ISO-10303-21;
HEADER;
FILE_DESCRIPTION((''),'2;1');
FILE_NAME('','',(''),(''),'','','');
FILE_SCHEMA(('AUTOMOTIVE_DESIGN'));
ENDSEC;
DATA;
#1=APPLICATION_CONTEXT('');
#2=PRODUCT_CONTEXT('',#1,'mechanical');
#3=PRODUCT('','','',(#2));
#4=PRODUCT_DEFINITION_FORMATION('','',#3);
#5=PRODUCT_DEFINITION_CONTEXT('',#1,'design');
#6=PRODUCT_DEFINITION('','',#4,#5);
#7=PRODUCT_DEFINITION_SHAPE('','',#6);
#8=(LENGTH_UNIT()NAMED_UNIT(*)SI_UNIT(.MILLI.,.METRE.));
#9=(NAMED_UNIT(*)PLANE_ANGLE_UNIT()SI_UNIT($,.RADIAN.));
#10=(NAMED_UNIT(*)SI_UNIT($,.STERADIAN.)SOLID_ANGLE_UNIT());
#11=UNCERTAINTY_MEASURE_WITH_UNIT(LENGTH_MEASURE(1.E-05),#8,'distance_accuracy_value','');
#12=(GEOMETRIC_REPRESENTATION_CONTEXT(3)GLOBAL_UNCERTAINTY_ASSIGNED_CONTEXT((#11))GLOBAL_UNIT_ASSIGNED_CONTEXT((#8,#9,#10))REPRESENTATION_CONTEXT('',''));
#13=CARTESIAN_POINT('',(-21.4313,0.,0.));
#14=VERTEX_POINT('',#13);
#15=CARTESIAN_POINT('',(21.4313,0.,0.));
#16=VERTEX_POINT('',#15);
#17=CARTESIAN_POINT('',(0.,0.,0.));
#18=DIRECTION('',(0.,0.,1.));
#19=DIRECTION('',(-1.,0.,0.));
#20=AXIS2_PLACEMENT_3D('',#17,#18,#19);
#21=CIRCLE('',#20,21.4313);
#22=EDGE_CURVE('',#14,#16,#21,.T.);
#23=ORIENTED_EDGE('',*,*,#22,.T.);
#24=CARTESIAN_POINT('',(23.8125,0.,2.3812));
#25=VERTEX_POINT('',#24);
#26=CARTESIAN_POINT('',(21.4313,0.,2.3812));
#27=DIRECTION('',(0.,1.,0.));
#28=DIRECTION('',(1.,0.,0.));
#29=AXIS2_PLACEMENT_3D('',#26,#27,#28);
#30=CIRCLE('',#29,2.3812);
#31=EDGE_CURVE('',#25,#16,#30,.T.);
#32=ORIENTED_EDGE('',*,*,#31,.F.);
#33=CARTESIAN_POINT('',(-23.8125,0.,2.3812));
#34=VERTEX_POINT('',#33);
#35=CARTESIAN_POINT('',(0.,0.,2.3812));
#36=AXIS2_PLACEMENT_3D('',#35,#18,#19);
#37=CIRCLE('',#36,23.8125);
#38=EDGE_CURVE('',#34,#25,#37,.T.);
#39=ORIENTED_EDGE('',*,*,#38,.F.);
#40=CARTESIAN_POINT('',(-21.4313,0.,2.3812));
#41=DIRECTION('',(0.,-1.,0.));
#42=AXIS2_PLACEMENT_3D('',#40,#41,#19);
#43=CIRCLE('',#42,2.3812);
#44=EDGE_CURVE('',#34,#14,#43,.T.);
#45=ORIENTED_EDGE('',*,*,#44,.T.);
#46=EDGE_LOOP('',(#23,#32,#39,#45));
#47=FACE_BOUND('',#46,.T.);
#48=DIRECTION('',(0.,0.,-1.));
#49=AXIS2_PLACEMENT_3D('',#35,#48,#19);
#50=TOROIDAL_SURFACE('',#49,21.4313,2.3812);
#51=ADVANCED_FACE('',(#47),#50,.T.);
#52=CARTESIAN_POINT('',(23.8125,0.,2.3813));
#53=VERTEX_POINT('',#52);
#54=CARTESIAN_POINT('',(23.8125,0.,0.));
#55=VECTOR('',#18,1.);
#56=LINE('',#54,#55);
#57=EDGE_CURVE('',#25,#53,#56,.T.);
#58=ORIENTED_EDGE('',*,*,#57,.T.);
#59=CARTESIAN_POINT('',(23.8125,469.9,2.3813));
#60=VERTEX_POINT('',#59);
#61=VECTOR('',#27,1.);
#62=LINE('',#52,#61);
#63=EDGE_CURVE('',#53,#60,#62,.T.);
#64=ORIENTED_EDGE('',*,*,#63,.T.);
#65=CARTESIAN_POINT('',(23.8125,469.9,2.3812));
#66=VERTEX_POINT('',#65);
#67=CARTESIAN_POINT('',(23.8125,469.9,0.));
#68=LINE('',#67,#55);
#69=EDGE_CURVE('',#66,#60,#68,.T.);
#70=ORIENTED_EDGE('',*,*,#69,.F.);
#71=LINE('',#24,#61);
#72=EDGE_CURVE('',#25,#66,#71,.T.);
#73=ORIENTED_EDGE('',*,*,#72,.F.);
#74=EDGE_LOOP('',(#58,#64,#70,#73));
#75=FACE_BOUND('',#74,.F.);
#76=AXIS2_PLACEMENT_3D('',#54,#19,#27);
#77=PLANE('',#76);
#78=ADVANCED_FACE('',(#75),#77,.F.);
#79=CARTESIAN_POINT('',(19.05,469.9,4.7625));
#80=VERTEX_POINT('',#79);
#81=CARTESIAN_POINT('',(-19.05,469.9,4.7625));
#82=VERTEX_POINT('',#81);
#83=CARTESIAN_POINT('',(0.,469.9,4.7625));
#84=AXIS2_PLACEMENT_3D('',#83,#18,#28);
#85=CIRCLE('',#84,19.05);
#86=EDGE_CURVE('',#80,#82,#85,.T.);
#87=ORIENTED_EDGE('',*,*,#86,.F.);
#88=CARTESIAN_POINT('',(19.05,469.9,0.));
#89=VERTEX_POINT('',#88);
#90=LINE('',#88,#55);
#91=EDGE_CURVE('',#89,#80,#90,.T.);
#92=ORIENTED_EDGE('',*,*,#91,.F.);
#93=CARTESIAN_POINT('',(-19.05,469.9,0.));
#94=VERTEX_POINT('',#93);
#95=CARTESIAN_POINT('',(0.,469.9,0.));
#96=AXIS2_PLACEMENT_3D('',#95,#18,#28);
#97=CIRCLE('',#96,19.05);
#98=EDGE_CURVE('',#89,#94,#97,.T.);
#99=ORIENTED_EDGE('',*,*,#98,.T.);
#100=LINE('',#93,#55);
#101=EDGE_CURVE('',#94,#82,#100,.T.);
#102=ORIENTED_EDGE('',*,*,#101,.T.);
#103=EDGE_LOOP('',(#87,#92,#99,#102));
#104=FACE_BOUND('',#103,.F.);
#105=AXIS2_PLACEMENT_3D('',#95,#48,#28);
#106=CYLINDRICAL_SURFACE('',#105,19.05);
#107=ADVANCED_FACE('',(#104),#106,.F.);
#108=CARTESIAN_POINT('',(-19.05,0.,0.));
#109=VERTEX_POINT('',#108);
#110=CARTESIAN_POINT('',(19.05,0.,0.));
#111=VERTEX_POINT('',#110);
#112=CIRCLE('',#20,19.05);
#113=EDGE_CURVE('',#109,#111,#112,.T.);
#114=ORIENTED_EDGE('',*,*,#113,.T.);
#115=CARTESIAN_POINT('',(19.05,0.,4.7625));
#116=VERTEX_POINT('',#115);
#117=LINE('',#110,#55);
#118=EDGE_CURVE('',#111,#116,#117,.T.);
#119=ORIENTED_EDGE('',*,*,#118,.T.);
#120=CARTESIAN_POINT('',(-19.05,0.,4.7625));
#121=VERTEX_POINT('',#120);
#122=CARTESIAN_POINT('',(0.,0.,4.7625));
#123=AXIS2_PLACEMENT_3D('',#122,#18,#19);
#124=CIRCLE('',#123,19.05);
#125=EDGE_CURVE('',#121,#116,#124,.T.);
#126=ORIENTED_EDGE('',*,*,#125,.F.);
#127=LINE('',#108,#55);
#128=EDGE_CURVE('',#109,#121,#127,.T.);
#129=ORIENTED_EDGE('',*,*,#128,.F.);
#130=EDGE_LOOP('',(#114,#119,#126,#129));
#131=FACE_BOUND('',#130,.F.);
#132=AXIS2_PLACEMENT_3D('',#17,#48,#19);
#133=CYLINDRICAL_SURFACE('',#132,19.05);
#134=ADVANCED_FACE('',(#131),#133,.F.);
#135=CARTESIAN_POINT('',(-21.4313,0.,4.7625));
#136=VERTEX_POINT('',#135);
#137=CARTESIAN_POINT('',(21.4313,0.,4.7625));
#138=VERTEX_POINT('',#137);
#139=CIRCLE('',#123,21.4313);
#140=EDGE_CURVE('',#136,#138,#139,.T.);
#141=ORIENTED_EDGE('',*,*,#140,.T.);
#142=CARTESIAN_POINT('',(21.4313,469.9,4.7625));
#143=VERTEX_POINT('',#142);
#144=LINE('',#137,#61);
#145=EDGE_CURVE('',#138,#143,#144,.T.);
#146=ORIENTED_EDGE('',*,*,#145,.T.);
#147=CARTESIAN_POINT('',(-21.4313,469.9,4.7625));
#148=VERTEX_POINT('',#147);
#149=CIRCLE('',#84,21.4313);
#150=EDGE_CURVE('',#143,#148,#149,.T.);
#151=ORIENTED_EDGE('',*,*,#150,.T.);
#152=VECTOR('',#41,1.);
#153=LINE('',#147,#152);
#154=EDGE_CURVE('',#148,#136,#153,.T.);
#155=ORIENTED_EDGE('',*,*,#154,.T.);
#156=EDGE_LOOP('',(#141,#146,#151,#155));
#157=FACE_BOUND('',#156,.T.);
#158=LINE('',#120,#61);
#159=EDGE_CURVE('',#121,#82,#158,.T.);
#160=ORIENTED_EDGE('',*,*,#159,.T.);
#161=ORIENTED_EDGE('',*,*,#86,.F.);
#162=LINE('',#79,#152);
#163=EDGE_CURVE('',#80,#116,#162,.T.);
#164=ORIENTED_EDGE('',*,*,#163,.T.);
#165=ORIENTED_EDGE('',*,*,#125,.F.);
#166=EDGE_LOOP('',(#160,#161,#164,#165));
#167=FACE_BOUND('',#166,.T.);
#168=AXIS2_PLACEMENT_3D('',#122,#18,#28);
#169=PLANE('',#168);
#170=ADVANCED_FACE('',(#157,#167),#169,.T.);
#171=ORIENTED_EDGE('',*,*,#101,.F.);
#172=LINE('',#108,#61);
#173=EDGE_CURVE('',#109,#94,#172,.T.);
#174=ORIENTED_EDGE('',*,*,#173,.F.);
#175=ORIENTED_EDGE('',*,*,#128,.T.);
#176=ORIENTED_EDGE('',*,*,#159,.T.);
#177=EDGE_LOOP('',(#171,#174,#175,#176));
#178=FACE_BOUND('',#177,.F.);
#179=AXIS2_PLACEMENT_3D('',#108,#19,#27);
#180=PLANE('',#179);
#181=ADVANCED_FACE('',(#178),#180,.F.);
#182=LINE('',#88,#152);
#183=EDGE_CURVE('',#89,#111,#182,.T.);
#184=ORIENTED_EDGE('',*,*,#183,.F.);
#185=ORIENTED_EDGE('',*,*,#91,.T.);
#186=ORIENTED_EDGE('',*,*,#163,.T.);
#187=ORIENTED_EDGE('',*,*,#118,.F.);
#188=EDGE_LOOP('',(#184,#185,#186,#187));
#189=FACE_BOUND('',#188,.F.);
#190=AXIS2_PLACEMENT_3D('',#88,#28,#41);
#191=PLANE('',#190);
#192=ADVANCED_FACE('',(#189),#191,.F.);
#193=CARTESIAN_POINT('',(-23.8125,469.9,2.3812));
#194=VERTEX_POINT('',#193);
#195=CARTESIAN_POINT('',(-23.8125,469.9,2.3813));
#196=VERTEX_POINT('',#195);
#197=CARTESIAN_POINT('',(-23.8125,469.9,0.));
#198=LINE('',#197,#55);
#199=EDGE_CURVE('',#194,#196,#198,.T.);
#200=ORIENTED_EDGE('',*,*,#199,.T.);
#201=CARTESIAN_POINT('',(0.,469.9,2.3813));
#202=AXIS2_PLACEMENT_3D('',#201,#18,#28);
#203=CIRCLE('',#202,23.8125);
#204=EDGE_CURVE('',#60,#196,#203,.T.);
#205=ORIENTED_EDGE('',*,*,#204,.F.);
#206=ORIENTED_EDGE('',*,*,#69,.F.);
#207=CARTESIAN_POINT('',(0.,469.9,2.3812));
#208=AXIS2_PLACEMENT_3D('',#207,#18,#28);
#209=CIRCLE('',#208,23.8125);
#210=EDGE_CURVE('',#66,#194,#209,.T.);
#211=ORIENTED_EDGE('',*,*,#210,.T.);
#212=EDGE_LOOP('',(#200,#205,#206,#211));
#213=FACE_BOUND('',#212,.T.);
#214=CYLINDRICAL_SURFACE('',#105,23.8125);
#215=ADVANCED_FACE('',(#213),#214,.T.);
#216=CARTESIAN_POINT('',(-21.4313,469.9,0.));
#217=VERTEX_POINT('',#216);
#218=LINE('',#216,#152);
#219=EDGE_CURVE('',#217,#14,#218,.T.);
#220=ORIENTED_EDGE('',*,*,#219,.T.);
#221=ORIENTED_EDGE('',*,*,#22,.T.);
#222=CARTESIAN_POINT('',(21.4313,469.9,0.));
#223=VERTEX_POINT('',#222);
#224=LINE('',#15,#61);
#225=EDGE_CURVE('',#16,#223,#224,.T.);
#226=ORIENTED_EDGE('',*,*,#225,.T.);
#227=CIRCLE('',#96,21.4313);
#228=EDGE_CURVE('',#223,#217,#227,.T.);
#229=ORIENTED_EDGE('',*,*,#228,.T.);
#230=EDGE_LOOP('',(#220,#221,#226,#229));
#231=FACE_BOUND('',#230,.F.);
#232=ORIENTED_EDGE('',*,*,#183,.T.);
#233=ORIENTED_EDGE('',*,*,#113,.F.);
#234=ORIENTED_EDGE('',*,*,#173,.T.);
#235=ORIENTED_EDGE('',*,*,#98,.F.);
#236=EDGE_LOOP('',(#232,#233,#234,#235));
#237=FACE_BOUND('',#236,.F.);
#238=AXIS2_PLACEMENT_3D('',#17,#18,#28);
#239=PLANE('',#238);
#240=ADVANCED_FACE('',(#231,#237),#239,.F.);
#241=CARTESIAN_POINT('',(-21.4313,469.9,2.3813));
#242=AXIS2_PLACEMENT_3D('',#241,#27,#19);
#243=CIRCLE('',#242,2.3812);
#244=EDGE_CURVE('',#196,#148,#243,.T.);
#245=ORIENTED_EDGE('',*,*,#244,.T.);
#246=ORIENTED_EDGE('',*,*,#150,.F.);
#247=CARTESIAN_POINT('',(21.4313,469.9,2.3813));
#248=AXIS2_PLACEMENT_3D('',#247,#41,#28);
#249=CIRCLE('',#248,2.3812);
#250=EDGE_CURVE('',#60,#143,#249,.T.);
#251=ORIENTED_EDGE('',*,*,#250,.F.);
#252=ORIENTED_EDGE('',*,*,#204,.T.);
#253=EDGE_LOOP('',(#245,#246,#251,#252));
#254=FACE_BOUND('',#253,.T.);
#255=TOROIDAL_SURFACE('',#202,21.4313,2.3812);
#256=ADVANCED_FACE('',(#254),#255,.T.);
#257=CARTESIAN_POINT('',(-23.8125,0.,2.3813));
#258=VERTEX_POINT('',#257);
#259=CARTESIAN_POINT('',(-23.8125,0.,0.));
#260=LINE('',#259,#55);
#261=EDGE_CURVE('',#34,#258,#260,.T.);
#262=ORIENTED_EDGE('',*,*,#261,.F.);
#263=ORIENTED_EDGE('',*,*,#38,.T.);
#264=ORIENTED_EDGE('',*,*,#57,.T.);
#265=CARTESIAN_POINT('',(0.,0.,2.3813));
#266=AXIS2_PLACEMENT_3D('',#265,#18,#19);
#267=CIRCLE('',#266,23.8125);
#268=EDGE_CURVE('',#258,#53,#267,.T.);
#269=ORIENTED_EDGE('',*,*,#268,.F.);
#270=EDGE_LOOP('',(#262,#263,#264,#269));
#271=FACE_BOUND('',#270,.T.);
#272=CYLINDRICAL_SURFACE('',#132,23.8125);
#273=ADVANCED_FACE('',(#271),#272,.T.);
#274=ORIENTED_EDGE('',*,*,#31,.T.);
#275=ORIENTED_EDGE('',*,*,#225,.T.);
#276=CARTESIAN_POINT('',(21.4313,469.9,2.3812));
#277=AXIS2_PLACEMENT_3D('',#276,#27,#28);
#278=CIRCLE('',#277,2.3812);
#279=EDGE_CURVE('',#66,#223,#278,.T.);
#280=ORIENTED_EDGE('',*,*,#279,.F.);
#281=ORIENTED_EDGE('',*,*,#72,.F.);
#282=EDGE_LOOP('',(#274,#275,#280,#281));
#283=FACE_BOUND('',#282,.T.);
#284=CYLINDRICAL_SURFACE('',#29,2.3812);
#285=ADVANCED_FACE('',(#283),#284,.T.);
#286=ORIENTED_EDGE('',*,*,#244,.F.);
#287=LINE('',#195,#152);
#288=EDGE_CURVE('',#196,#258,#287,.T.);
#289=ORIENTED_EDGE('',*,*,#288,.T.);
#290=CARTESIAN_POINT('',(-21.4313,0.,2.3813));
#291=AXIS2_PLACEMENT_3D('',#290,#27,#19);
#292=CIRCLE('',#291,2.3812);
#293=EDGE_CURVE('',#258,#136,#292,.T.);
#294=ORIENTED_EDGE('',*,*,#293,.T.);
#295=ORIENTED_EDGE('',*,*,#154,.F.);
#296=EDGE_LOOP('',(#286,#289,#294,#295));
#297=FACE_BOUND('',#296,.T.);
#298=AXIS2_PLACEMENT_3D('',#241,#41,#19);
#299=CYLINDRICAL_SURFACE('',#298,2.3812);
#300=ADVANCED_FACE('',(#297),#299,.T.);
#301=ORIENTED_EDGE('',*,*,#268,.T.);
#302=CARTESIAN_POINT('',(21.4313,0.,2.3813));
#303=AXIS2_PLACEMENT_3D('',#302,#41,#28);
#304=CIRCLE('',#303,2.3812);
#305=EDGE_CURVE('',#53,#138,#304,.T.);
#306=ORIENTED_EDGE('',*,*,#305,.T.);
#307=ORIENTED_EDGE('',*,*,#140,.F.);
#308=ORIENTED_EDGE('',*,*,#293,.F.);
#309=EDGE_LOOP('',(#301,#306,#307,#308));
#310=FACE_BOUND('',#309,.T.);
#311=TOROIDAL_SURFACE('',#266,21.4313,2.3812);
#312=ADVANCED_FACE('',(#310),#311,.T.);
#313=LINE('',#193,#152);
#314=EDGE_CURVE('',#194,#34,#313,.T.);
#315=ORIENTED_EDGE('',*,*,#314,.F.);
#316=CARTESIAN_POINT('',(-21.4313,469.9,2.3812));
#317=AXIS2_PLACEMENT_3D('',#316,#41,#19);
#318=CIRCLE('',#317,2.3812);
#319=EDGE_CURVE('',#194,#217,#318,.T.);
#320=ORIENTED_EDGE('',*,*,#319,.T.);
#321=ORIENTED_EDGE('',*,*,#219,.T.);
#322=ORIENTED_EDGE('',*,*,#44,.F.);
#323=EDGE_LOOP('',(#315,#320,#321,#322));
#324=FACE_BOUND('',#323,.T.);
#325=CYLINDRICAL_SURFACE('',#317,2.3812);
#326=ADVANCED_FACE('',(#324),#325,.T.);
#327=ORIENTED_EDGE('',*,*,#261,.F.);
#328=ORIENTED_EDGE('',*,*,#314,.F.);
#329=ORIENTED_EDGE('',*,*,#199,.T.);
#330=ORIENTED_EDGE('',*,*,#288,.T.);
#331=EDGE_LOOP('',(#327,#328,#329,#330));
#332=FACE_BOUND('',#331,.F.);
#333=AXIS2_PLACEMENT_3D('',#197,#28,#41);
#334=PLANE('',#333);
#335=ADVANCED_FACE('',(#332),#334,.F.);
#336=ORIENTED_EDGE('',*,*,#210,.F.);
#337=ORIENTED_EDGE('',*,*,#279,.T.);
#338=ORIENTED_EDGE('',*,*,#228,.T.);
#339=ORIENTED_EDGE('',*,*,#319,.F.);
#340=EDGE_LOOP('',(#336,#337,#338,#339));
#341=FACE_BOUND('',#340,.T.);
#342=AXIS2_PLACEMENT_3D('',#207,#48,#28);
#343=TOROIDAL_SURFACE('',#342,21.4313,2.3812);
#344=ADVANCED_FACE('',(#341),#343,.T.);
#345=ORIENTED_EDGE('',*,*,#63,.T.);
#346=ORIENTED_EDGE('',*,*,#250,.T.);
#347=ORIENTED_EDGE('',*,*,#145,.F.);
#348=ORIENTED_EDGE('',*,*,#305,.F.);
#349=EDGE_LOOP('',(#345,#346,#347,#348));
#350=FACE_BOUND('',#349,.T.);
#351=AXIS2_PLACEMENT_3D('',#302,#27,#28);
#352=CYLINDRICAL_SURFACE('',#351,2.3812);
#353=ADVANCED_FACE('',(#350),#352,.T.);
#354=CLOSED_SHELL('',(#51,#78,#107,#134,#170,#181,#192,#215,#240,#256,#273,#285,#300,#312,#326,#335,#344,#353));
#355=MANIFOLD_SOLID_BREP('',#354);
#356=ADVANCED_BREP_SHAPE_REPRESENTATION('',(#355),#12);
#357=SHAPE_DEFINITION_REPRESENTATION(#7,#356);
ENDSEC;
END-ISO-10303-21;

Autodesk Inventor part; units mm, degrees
ref_plane "YZ Plane" through (0, 0, 0) normal (1, 0, 0) x (0, 1, 0)
ref_plane "XZ Plane" through (0, 0, 0) normal (0, 1, 0) x (-1, 0, 0)
ref_plane "XY Plane" through (0, 0, 0) normal (0, 0, 1) x (1, 0, 0)
sketch "Sketch1" plane through (0, 0, 0) normal (0, 0, 1) x (1, 0, 0)
  arc A0 (-19.05, 0) -> (19.05, 0) centre (0, 0) ccw
  arc A1 (19.05, 469.9) -> (-19.05, 469.9) centre (0, 469.9) ccw
  line L0 (-19.05, 0) -> (-19.05, 469.9)
  line L1 (19.05, 469.9) -> (19.05, 0)
  arc A2 (23.8125, 469.9) -> (-23.8125, 469.9) centre (0, 469.9) ccw
  arc A3 (-23.8125, 0) -> (23.8125, 0) centre (0, 0) ccw
  line L2 (-23.8125, 469.9) -> (-23.8125, 0)
  line L3 (23.8125, 0) -> (23.8125, 469.9)
  dimension "d0" = 469.9
  dimension "d1" = 19.05
  dimension "d2" = 4.7625
extrude "Extrusion1" add sketch "Sketch1" along normal blind 4.7625
fillet "Fillet1" radius 2.3813 8 edges at (0, 493.7125, 4.7625) (23.8125, 234.95, 4.7625) (0, -23.8125, 4.7625) (-23.8125, 234.95, 4.7625) (0, -23.8125, 0) (23.8125, 234.95, 0) (0, 493.7125, 0) (-23.8125, 234.95, 0)
properties part number "Belt_VerticalConveyor_Rear"
